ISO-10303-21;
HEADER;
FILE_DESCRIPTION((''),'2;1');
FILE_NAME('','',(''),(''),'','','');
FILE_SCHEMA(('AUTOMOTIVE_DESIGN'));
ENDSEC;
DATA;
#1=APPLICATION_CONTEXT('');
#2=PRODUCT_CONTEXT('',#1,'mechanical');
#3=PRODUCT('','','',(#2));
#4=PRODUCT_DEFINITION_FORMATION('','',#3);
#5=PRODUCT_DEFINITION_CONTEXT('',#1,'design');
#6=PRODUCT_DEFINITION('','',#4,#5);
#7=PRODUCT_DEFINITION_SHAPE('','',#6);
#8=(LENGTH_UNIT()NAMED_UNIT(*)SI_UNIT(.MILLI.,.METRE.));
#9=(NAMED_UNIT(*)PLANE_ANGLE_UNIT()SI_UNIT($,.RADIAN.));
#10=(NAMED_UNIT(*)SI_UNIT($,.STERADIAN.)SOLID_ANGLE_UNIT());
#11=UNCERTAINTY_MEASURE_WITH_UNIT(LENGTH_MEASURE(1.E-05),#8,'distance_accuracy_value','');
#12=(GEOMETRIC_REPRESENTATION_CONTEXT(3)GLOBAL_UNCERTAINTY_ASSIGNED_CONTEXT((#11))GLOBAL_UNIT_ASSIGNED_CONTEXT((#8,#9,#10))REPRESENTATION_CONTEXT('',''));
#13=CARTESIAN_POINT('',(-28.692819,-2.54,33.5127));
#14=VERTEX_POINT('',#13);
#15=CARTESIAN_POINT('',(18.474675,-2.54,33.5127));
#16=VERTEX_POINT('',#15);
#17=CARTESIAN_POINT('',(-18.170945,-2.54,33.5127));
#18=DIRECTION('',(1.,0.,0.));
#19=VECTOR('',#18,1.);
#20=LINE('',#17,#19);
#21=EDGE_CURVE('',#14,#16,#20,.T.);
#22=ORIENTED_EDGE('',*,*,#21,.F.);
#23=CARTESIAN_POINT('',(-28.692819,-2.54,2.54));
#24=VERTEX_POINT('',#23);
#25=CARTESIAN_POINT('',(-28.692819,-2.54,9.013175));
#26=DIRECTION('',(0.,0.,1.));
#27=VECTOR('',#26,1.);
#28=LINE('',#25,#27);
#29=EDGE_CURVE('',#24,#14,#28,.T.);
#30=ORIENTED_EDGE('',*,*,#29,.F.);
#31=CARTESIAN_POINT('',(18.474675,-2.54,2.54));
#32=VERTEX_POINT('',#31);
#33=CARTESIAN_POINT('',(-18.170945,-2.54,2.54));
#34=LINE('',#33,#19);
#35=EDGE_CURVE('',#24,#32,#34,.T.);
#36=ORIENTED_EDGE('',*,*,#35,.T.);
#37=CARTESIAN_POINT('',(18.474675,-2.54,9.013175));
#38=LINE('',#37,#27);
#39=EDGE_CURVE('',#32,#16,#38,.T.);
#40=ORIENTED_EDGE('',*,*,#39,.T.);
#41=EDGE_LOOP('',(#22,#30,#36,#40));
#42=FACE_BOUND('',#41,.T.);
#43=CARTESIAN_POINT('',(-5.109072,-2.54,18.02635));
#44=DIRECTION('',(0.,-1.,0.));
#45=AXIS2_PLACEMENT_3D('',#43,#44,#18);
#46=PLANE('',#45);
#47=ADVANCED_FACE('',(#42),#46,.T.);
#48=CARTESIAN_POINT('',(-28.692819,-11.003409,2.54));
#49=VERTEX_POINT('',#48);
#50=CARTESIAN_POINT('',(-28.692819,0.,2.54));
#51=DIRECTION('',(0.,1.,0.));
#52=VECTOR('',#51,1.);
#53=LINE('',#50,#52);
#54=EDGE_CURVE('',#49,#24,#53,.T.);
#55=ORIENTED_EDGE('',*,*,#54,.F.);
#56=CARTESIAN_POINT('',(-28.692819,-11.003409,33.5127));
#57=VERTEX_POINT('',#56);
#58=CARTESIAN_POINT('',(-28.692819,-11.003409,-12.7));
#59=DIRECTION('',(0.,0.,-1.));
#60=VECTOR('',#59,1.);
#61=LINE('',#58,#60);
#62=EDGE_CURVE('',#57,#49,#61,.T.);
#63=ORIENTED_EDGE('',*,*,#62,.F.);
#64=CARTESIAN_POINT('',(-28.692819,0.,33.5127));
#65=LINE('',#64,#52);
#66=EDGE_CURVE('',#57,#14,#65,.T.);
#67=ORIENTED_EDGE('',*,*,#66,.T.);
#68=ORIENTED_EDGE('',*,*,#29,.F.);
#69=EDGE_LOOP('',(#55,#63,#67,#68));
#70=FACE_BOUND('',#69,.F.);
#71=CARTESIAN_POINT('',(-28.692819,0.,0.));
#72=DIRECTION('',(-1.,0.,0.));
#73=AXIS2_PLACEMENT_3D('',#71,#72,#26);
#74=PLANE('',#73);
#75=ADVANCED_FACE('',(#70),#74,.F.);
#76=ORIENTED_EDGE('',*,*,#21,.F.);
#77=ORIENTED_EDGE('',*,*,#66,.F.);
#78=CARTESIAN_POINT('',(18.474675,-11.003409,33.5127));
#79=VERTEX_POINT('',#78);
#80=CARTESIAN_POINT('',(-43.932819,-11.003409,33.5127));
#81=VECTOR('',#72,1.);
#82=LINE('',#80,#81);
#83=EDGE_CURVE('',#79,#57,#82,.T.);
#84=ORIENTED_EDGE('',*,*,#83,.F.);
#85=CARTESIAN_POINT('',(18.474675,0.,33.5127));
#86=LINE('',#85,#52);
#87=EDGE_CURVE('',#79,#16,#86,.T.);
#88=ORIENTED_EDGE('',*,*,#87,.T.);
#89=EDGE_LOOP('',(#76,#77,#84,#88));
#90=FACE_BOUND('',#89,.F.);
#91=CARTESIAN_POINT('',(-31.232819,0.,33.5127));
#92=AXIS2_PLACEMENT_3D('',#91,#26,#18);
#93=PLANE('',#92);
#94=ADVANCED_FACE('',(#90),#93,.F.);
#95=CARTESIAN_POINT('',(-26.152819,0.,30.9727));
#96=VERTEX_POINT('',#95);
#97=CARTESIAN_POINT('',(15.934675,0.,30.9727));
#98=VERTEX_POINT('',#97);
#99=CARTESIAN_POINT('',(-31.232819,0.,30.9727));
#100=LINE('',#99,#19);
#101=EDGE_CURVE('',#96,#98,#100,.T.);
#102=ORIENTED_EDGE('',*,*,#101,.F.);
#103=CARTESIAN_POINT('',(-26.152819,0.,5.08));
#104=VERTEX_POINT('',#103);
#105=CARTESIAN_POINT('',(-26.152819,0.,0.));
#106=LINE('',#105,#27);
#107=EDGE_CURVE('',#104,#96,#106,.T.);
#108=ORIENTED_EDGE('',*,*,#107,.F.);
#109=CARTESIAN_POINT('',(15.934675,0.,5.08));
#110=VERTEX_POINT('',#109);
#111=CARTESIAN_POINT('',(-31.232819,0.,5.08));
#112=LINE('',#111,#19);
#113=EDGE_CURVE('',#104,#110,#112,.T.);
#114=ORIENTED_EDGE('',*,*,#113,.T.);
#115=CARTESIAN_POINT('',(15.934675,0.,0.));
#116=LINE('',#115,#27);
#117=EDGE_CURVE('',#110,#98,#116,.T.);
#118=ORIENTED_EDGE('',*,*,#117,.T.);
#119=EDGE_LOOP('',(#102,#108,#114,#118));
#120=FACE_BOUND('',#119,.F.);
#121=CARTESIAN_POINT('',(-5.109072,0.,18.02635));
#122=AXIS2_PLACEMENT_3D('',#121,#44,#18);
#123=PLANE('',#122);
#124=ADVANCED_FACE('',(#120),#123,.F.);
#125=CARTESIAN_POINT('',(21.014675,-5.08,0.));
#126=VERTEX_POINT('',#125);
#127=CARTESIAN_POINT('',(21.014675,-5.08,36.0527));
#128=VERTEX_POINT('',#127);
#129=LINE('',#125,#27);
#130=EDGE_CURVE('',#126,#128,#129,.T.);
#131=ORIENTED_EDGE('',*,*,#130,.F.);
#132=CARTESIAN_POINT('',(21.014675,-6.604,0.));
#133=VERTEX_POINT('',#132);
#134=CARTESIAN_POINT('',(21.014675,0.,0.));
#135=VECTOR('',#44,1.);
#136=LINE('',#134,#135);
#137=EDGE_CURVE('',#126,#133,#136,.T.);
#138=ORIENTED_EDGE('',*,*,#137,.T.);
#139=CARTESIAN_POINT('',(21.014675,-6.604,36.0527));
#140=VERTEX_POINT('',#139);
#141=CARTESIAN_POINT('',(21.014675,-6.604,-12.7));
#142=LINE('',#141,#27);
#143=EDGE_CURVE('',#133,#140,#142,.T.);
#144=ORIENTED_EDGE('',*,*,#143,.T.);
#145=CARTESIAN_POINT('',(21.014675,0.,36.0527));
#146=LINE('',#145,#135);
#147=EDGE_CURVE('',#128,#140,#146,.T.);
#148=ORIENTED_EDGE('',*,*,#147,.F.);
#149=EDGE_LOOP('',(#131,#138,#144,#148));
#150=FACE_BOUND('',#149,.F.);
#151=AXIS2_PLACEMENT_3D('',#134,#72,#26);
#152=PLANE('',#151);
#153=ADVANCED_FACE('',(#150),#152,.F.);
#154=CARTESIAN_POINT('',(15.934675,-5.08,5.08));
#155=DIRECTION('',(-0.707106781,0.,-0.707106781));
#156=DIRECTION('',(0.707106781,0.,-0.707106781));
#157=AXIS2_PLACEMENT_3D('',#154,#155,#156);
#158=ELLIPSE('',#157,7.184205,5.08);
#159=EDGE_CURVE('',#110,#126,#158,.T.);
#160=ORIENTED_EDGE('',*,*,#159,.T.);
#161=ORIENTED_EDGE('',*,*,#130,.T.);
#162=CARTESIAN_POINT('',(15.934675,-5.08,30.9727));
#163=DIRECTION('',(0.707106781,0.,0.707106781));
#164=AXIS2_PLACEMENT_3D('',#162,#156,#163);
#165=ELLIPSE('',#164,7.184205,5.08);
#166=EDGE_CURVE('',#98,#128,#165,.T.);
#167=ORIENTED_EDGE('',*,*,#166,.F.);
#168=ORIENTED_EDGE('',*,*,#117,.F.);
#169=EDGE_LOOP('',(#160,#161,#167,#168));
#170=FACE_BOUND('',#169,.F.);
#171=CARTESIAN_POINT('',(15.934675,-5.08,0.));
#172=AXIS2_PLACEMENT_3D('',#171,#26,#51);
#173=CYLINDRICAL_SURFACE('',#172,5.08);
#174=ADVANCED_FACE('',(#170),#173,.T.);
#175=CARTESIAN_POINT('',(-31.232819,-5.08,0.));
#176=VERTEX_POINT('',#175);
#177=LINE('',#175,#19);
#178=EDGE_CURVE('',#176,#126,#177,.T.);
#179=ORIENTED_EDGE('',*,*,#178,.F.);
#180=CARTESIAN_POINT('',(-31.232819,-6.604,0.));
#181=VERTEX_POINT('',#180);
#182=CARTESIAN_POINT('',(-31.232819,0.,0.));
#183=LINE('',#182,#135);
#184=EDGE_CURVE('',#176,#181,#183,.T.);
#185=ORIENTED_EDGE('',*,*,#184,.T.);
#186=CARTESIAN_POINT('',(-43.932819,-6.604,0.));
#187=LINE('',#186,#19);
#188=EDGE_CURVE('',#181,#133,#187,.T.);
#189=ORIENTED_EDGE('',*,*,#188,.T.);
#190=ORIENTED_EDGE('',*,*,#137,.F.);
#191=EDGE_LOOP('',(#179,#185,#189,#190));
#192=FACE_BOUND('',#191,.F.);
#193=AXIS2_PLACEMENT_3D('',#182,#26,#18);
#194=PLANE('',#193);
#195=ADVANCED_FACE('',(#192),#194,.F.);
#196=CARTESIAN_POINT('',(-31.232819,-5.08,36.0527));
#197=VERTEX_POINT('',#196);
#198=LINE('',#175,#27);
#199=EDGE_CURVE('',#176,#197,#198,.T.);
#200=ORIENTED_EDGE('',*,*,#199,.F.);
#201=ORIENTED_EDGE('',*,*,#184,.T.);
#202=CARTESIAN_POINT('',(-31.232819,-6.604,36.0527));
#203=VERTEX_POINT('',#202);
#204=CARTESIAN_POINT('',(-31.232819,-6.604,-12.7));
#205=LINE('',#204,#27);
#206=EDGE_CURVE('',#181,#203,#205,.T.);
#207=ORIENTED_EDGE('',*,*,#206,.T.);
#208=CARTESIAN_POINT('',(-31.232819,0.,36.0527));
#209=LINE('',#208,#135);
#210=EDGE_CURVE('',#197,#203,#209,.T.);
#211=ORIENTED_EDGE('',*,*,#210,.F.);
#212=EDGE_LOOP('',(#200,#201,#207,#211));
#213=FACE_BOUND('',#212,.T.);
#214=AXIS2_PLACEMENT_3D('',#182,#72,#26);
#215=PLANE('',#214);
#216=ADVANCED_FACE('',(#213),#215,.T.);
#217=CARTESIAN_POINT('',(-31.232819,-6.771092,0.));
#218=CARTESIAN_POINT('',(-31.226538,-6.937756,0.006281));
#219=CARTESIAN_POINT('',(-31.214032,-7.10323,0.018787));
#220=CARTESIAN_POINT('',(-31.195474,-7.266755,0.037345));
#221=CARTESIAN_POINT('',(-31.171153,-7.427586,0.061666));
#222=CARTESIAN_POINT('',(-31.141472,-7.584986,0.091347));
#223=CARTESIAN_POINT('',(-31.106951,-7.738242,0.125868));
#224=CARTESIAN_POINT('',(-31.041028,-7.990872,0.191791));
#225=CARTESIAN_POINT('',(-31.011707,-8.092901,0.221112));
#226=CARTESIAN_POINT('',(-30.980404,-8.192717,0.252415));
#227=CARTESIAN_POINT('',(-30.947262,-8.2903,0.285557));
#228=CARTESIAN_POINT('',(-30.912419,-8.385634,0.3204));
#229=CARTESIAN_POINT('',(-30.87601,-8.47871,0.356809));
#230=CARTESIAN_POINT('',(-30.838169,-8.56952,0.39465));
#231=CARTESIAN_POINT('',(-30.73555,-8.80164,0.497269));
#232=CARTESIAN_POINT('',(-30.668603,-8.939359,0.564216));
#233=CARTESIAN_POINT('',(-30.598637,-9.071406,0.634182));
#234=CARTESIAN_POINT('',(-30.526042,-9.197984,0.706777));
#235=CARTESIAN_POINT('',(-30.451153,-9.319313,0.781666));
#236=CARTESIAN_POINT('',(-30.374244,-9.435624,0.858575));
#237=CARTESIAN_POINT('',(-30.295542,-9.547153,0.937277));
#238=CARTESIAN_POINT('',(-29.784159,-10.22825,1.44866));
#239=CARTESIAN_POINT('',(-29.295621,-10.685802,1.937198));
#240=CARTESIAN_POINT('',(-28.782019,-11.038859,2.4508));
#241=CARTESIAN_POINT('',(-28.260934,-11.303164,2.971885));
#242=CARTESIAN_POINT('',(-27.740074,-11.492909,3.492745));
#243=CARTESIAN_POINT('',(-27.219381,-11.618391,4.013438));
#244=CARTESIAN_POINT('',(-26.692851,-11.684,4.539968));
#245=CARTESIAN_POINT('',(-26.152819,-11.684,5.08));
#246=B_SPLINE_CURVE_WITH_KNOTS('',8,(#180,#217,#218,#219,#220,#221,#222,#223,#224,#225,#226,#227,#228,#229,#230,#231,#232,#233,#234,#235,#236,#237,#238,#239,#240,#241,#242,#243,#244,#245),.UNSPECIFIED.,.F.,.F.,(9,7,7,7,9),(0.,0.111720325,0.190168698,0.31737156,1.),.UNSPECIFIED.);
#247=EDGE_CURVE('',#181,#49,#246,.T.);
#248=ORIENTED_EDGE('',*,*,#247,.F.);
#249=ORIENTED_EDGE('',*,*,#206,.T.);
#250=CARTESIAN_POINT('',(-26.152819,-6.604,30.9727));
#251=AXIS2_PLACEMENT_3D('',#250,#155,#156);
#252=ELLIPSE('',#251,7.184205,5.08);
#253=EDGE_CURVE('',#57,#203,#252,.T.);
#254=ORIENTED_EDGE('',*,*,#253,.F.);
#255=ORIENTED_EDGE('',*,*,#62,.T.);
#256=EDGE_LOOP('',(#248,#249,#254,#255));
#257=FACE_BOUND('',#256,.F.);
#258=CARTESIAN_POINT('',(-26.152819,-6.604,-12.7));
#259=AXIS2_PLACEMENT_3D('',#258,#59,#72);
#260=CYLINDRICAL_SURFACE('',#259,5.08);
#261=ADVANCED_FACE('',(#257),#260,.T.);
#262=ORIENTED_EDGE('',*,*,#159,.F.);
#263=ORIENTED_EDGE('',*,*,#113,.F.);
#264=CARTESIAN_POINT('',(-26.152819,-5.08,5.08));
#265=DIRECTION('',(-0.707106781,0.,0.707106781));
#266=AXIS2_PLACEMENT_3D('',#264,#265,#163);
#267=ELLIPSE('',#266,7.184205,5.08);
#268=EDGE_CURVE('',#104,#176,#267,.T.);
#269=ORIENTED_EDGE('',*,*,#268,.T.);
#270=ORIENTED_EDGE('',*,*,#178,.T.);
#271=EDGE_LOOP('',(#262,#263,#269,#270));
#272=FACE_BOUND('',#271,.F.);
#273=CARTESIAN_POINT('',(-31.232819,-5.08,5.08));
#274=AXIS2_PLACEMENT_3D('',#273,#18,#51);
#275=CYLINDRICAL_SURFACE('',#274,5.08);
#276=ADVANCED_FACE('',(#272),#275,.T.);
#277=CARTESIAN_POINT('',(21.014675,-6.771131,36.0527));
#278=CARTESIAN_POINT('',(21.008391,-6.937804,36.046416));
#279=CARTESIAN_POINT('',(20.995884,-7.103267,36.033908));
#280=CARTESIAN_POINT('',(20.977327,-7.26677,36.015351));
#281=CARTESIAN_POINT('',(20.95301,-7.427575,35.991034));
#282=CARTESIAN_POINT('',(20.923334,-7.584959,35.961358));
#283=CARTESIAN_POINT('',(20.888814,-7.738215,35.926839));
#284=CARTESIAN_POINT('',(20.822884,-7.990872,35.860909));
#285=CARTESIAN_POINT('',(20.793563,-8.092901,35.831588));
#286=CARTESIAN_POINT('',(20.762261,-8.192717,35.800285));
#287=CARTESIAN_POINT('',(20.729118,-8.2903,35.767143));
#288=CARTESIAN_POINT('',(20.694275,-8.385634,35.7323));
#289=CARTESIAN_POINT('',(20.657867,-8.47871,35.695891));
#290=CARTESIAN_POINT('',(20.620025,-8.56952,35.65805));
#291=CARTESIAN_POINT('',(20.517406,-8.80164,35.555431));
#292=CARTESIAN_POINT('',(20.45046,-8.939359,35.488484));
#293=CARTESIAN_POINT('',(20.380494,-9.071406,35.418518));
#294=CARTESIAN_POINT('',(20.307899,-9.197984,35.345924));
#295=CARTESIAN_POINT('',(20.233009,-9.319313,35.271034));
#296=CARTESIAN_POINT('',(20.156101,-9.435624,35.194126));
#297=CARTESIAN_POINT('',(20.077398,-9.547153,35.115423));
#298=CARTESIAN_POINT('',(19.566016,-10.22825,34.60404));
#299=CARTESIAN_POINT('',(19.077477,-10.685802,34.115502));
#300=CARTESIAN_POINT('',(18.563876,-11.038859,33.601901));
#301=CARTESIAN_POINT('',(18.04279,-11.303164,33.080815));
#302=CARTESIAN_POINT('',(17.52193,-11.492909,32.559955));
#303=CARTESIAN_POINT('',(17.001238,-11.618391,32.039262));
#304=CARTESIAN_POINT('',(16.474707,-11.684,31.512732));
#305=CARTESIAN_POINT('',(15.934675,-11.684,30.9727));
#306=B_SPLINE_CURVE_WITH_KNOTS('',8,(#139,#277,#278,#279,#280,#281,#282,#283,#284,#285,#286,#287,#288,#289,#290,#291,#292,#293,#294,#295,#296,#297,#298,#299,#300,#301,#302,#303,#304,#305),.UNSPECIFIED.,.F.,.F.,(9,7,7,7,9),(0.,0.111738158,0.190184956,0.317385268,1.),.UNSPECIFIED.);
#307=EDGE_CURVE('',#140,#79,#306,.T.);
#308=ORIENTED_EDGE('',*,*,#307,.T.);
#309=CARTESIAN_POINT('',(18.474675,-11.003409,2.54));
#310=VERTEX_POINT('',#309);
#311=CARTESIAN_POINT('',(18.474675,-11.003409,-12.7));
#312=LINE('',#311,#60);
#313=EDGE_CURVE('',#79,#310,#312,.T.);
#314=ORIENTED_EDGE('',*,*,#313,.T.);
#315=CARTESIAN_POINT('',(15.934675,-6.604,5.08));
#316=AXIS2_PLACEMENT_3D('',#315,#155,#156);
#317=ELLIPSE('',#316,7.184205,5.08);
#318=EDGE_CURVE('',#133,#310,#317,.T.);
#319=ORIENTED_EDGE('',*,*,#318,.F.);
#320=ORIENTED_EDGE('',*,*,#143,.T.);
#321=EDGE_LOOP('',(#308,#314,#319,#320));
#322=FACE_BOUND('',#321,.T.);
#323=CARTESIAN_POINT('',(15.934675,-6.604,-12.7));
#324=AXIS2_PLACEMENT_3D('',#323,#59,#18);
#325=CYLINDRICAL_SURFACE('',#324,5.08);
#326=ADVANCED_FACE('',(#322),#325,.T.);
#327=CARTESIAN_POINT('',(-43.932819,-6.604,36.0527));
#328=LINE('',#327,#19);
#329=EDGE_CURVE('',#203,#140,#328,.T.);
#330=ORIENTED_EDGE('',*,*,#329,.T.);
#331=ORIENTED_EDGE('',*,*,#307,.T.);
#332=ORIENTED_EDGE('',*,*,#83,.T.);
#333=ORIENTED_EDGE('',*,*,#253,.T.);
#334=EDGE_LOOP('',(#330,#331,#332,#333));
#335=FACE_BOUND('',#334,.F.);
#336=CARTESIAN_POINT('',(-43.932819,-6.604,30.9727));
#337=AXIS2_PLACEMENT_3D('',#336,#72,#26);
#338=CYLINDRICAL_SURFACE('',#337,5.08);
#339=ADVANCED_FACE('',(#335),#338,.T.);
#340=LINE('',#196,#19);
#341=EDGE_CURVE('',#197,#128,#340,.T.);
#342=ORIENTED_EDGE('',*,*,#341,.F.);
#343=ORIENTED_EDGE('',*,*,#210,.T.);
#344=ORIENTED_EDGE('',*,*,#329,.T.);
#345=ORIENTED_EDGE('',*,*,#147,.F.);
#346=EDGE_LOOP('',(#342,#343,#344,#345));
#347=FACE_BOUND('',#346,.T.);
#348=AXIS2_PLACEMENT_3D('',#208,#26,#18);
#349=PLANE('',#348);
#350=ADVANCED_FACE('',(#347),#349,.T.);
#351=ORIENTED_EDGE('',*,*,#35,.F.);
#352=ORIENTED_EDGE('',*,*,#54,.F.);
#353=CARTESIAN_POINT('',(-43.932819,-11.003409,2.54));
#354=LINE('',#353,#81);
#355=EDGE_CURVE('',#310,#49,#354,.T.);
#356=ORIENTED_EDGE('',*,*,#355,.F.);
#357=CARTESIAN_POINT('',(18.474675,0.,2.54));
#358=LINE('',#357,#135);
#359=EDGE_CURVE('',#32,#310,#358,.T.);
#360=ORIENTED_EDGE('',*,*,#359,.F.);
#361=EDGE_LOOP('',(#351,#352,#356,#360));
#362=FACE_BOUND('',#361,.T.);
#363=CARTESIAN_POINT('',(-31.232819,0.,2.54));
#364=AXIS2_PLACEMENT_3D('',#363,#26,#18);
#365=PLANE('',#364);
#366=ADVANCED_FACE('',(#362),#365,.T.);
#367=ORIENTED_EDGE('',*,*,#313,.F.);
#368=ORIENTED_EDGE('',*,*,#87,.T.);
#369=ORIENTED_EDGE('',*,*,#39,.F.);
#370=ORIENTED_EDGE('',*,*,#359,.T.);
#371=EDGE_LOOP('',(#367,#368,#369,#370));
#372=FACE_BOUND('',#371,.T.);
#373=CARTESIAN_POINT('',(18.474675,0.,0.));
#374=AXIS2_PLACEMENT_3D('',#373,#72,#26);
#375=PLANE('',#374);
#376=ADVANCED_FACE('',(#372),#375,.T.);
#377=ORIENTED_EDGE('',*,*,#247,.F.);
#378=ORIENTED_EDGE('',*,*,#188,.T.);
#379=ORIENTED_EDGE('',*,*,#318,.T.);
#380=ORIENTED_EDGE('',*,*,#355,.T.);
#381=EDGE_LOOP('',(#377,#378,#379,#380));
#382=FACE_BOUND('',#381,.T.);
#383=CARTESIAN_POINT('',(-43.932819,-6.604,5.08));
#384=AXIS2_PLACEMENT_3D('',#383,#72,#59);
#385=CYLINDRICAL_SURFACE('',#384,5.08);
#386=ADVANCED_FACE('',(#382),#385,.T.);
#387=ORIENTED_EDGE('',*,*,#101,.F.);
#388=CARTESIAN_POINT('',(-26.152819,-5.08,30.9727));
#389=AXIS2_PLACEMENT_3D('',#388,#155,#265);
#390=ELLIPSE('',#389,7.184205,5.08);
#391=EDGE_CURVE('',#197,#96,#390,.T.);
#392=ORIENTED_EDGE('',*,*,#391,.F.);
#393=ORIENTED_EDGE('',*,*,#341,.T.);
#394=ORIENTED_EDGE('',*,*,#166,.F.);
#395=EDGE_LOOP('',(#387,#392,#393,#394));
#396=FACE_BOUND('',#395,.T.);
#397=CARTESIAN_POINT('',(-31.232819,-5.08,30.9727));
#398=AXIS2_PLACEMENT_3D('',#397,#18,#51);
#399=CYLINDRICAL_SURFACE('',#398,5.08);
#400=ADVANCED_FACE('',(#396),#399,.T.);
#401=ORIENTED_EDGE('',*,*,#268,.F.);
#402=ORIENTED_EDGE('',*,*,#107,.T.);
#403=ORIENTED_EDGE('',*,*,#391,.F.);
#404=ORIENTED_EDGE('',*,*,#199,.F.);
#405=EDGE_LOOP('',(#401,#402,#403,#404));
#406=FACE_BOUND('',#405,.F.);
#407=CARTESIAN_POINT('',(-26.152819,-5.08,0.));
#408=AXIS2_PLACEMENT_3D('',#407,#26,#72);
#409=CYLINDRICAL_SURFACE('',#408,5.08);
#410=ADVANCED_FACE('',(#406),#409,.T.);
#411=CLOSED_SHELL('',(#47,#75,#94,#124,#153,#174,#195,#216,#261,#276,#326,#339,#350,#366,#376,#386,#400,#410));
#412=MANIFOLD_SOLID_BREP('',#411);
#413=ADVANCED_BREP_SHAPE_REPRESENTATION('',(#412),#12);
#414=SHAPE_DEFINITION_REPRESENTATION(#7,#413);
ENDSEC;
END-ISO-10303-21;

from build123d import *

# Parameters (mm, degrees)
F0_W        = 52.2474944592
F0_H        = 36.0527001321
F1_DEPTH    = 11.684
F2_T        = -2.54
F3_T1_DEPTH = 61.4527001321
F3_T3_DEPTH = 77.6474944592
F4_R        = 5.08


# Not quite as in the source:
# - a fillet or chamfer that OpenCascade refuses, or shapes differently, is made with other operations: its cross-section is extruded or revolved along the edge and cut away or added


with BuildPart() as f1:
    # F0 (on Front) → F1 (new body)
    with BuildSketch(Plane.XZ):
        with Locations((-5.1090717316, 18.0263500661)):
            Rectangle(F0_W, F0_H)
    extrude(amount=F1_DEPTH)

    # F2
    f2_openings = [f1.faces().sort_by_distance(p)[0] for p in [
        (-5.109072, -11.684, 18.02635),
    ]]
    offset(amount=F2_T, openings=f2_openings)

    # F3: fillet of radius 5.08 on 4 edges, made by hand

    # F3_s2 → F3_t1 (cut)
    with BuildSketch(Plane.XY.offset(-12.7)):
        with BuildLine():
            ThreePointArc((21.014675498, -6.604), (19.5267779464, -10.1961024484), (15.934675498, -11.684))
            Line((15.934675498, -11.684), (21.014675498, -11.684))
            Line((21.014675498, -11.684), (21.014675498, -6.604))
        make_face()
        with BuildLine():
            ThreePointArc((-31.2328189611, -6.604), (-29.7449214096, -10.1961024484), (-26.1528189611, -11.684))
            Line((-26.1528189611, -11.684), (-31.2328189611, -11.684))
            Line((-31.2328189611, -11.684), (-31.2328189611, -6.604))
        make_face()
    extrude(amount=F3_T1_DEPTH, mode=Mode.SUBTRACT)

    # F3_s4 → F3_t3 (cut)
    with BuildSketch(Plane.YZ.offset(-43.9328189611)):
        with BuildLine():
            ThreePointArc((-6.604, 36.0527001321), (-10.1961024484, 34.5648025806), (-11.684, 30.9727001321))
            Line((-11.684, 30.9727001321), (-11.684, 36.0527001321))
            Line((-11.684, 36.0527001321), (-6.604, 36.0527001321))
        make_face()
        with BuildLine():
            ThreePointArc((-6.604, 0), (-10.1961024484, 1.4878975516), (-11.684, 5.08))
            Line((-11.684, 5.08), (-11.684, 0))
            Line((-11.684, 0), (-6.604, 0))
        make_face()
    extrude(amount=F3_T3_DEPTH, mode=Mode.SUBTRACT)

    # F4
    f4_edges = [f1.edges().sort_by_distance(p)[0] for p in [
        (-5.109072, 0, 0),
        (-31.232819, 0, 18.02635),
        (-5.109072, 0, 36.0527),
        (21.014675, 0, 18.02635),
    ]]
    fillet(f4_edges, radius=F4_R)


solid = f1.part
